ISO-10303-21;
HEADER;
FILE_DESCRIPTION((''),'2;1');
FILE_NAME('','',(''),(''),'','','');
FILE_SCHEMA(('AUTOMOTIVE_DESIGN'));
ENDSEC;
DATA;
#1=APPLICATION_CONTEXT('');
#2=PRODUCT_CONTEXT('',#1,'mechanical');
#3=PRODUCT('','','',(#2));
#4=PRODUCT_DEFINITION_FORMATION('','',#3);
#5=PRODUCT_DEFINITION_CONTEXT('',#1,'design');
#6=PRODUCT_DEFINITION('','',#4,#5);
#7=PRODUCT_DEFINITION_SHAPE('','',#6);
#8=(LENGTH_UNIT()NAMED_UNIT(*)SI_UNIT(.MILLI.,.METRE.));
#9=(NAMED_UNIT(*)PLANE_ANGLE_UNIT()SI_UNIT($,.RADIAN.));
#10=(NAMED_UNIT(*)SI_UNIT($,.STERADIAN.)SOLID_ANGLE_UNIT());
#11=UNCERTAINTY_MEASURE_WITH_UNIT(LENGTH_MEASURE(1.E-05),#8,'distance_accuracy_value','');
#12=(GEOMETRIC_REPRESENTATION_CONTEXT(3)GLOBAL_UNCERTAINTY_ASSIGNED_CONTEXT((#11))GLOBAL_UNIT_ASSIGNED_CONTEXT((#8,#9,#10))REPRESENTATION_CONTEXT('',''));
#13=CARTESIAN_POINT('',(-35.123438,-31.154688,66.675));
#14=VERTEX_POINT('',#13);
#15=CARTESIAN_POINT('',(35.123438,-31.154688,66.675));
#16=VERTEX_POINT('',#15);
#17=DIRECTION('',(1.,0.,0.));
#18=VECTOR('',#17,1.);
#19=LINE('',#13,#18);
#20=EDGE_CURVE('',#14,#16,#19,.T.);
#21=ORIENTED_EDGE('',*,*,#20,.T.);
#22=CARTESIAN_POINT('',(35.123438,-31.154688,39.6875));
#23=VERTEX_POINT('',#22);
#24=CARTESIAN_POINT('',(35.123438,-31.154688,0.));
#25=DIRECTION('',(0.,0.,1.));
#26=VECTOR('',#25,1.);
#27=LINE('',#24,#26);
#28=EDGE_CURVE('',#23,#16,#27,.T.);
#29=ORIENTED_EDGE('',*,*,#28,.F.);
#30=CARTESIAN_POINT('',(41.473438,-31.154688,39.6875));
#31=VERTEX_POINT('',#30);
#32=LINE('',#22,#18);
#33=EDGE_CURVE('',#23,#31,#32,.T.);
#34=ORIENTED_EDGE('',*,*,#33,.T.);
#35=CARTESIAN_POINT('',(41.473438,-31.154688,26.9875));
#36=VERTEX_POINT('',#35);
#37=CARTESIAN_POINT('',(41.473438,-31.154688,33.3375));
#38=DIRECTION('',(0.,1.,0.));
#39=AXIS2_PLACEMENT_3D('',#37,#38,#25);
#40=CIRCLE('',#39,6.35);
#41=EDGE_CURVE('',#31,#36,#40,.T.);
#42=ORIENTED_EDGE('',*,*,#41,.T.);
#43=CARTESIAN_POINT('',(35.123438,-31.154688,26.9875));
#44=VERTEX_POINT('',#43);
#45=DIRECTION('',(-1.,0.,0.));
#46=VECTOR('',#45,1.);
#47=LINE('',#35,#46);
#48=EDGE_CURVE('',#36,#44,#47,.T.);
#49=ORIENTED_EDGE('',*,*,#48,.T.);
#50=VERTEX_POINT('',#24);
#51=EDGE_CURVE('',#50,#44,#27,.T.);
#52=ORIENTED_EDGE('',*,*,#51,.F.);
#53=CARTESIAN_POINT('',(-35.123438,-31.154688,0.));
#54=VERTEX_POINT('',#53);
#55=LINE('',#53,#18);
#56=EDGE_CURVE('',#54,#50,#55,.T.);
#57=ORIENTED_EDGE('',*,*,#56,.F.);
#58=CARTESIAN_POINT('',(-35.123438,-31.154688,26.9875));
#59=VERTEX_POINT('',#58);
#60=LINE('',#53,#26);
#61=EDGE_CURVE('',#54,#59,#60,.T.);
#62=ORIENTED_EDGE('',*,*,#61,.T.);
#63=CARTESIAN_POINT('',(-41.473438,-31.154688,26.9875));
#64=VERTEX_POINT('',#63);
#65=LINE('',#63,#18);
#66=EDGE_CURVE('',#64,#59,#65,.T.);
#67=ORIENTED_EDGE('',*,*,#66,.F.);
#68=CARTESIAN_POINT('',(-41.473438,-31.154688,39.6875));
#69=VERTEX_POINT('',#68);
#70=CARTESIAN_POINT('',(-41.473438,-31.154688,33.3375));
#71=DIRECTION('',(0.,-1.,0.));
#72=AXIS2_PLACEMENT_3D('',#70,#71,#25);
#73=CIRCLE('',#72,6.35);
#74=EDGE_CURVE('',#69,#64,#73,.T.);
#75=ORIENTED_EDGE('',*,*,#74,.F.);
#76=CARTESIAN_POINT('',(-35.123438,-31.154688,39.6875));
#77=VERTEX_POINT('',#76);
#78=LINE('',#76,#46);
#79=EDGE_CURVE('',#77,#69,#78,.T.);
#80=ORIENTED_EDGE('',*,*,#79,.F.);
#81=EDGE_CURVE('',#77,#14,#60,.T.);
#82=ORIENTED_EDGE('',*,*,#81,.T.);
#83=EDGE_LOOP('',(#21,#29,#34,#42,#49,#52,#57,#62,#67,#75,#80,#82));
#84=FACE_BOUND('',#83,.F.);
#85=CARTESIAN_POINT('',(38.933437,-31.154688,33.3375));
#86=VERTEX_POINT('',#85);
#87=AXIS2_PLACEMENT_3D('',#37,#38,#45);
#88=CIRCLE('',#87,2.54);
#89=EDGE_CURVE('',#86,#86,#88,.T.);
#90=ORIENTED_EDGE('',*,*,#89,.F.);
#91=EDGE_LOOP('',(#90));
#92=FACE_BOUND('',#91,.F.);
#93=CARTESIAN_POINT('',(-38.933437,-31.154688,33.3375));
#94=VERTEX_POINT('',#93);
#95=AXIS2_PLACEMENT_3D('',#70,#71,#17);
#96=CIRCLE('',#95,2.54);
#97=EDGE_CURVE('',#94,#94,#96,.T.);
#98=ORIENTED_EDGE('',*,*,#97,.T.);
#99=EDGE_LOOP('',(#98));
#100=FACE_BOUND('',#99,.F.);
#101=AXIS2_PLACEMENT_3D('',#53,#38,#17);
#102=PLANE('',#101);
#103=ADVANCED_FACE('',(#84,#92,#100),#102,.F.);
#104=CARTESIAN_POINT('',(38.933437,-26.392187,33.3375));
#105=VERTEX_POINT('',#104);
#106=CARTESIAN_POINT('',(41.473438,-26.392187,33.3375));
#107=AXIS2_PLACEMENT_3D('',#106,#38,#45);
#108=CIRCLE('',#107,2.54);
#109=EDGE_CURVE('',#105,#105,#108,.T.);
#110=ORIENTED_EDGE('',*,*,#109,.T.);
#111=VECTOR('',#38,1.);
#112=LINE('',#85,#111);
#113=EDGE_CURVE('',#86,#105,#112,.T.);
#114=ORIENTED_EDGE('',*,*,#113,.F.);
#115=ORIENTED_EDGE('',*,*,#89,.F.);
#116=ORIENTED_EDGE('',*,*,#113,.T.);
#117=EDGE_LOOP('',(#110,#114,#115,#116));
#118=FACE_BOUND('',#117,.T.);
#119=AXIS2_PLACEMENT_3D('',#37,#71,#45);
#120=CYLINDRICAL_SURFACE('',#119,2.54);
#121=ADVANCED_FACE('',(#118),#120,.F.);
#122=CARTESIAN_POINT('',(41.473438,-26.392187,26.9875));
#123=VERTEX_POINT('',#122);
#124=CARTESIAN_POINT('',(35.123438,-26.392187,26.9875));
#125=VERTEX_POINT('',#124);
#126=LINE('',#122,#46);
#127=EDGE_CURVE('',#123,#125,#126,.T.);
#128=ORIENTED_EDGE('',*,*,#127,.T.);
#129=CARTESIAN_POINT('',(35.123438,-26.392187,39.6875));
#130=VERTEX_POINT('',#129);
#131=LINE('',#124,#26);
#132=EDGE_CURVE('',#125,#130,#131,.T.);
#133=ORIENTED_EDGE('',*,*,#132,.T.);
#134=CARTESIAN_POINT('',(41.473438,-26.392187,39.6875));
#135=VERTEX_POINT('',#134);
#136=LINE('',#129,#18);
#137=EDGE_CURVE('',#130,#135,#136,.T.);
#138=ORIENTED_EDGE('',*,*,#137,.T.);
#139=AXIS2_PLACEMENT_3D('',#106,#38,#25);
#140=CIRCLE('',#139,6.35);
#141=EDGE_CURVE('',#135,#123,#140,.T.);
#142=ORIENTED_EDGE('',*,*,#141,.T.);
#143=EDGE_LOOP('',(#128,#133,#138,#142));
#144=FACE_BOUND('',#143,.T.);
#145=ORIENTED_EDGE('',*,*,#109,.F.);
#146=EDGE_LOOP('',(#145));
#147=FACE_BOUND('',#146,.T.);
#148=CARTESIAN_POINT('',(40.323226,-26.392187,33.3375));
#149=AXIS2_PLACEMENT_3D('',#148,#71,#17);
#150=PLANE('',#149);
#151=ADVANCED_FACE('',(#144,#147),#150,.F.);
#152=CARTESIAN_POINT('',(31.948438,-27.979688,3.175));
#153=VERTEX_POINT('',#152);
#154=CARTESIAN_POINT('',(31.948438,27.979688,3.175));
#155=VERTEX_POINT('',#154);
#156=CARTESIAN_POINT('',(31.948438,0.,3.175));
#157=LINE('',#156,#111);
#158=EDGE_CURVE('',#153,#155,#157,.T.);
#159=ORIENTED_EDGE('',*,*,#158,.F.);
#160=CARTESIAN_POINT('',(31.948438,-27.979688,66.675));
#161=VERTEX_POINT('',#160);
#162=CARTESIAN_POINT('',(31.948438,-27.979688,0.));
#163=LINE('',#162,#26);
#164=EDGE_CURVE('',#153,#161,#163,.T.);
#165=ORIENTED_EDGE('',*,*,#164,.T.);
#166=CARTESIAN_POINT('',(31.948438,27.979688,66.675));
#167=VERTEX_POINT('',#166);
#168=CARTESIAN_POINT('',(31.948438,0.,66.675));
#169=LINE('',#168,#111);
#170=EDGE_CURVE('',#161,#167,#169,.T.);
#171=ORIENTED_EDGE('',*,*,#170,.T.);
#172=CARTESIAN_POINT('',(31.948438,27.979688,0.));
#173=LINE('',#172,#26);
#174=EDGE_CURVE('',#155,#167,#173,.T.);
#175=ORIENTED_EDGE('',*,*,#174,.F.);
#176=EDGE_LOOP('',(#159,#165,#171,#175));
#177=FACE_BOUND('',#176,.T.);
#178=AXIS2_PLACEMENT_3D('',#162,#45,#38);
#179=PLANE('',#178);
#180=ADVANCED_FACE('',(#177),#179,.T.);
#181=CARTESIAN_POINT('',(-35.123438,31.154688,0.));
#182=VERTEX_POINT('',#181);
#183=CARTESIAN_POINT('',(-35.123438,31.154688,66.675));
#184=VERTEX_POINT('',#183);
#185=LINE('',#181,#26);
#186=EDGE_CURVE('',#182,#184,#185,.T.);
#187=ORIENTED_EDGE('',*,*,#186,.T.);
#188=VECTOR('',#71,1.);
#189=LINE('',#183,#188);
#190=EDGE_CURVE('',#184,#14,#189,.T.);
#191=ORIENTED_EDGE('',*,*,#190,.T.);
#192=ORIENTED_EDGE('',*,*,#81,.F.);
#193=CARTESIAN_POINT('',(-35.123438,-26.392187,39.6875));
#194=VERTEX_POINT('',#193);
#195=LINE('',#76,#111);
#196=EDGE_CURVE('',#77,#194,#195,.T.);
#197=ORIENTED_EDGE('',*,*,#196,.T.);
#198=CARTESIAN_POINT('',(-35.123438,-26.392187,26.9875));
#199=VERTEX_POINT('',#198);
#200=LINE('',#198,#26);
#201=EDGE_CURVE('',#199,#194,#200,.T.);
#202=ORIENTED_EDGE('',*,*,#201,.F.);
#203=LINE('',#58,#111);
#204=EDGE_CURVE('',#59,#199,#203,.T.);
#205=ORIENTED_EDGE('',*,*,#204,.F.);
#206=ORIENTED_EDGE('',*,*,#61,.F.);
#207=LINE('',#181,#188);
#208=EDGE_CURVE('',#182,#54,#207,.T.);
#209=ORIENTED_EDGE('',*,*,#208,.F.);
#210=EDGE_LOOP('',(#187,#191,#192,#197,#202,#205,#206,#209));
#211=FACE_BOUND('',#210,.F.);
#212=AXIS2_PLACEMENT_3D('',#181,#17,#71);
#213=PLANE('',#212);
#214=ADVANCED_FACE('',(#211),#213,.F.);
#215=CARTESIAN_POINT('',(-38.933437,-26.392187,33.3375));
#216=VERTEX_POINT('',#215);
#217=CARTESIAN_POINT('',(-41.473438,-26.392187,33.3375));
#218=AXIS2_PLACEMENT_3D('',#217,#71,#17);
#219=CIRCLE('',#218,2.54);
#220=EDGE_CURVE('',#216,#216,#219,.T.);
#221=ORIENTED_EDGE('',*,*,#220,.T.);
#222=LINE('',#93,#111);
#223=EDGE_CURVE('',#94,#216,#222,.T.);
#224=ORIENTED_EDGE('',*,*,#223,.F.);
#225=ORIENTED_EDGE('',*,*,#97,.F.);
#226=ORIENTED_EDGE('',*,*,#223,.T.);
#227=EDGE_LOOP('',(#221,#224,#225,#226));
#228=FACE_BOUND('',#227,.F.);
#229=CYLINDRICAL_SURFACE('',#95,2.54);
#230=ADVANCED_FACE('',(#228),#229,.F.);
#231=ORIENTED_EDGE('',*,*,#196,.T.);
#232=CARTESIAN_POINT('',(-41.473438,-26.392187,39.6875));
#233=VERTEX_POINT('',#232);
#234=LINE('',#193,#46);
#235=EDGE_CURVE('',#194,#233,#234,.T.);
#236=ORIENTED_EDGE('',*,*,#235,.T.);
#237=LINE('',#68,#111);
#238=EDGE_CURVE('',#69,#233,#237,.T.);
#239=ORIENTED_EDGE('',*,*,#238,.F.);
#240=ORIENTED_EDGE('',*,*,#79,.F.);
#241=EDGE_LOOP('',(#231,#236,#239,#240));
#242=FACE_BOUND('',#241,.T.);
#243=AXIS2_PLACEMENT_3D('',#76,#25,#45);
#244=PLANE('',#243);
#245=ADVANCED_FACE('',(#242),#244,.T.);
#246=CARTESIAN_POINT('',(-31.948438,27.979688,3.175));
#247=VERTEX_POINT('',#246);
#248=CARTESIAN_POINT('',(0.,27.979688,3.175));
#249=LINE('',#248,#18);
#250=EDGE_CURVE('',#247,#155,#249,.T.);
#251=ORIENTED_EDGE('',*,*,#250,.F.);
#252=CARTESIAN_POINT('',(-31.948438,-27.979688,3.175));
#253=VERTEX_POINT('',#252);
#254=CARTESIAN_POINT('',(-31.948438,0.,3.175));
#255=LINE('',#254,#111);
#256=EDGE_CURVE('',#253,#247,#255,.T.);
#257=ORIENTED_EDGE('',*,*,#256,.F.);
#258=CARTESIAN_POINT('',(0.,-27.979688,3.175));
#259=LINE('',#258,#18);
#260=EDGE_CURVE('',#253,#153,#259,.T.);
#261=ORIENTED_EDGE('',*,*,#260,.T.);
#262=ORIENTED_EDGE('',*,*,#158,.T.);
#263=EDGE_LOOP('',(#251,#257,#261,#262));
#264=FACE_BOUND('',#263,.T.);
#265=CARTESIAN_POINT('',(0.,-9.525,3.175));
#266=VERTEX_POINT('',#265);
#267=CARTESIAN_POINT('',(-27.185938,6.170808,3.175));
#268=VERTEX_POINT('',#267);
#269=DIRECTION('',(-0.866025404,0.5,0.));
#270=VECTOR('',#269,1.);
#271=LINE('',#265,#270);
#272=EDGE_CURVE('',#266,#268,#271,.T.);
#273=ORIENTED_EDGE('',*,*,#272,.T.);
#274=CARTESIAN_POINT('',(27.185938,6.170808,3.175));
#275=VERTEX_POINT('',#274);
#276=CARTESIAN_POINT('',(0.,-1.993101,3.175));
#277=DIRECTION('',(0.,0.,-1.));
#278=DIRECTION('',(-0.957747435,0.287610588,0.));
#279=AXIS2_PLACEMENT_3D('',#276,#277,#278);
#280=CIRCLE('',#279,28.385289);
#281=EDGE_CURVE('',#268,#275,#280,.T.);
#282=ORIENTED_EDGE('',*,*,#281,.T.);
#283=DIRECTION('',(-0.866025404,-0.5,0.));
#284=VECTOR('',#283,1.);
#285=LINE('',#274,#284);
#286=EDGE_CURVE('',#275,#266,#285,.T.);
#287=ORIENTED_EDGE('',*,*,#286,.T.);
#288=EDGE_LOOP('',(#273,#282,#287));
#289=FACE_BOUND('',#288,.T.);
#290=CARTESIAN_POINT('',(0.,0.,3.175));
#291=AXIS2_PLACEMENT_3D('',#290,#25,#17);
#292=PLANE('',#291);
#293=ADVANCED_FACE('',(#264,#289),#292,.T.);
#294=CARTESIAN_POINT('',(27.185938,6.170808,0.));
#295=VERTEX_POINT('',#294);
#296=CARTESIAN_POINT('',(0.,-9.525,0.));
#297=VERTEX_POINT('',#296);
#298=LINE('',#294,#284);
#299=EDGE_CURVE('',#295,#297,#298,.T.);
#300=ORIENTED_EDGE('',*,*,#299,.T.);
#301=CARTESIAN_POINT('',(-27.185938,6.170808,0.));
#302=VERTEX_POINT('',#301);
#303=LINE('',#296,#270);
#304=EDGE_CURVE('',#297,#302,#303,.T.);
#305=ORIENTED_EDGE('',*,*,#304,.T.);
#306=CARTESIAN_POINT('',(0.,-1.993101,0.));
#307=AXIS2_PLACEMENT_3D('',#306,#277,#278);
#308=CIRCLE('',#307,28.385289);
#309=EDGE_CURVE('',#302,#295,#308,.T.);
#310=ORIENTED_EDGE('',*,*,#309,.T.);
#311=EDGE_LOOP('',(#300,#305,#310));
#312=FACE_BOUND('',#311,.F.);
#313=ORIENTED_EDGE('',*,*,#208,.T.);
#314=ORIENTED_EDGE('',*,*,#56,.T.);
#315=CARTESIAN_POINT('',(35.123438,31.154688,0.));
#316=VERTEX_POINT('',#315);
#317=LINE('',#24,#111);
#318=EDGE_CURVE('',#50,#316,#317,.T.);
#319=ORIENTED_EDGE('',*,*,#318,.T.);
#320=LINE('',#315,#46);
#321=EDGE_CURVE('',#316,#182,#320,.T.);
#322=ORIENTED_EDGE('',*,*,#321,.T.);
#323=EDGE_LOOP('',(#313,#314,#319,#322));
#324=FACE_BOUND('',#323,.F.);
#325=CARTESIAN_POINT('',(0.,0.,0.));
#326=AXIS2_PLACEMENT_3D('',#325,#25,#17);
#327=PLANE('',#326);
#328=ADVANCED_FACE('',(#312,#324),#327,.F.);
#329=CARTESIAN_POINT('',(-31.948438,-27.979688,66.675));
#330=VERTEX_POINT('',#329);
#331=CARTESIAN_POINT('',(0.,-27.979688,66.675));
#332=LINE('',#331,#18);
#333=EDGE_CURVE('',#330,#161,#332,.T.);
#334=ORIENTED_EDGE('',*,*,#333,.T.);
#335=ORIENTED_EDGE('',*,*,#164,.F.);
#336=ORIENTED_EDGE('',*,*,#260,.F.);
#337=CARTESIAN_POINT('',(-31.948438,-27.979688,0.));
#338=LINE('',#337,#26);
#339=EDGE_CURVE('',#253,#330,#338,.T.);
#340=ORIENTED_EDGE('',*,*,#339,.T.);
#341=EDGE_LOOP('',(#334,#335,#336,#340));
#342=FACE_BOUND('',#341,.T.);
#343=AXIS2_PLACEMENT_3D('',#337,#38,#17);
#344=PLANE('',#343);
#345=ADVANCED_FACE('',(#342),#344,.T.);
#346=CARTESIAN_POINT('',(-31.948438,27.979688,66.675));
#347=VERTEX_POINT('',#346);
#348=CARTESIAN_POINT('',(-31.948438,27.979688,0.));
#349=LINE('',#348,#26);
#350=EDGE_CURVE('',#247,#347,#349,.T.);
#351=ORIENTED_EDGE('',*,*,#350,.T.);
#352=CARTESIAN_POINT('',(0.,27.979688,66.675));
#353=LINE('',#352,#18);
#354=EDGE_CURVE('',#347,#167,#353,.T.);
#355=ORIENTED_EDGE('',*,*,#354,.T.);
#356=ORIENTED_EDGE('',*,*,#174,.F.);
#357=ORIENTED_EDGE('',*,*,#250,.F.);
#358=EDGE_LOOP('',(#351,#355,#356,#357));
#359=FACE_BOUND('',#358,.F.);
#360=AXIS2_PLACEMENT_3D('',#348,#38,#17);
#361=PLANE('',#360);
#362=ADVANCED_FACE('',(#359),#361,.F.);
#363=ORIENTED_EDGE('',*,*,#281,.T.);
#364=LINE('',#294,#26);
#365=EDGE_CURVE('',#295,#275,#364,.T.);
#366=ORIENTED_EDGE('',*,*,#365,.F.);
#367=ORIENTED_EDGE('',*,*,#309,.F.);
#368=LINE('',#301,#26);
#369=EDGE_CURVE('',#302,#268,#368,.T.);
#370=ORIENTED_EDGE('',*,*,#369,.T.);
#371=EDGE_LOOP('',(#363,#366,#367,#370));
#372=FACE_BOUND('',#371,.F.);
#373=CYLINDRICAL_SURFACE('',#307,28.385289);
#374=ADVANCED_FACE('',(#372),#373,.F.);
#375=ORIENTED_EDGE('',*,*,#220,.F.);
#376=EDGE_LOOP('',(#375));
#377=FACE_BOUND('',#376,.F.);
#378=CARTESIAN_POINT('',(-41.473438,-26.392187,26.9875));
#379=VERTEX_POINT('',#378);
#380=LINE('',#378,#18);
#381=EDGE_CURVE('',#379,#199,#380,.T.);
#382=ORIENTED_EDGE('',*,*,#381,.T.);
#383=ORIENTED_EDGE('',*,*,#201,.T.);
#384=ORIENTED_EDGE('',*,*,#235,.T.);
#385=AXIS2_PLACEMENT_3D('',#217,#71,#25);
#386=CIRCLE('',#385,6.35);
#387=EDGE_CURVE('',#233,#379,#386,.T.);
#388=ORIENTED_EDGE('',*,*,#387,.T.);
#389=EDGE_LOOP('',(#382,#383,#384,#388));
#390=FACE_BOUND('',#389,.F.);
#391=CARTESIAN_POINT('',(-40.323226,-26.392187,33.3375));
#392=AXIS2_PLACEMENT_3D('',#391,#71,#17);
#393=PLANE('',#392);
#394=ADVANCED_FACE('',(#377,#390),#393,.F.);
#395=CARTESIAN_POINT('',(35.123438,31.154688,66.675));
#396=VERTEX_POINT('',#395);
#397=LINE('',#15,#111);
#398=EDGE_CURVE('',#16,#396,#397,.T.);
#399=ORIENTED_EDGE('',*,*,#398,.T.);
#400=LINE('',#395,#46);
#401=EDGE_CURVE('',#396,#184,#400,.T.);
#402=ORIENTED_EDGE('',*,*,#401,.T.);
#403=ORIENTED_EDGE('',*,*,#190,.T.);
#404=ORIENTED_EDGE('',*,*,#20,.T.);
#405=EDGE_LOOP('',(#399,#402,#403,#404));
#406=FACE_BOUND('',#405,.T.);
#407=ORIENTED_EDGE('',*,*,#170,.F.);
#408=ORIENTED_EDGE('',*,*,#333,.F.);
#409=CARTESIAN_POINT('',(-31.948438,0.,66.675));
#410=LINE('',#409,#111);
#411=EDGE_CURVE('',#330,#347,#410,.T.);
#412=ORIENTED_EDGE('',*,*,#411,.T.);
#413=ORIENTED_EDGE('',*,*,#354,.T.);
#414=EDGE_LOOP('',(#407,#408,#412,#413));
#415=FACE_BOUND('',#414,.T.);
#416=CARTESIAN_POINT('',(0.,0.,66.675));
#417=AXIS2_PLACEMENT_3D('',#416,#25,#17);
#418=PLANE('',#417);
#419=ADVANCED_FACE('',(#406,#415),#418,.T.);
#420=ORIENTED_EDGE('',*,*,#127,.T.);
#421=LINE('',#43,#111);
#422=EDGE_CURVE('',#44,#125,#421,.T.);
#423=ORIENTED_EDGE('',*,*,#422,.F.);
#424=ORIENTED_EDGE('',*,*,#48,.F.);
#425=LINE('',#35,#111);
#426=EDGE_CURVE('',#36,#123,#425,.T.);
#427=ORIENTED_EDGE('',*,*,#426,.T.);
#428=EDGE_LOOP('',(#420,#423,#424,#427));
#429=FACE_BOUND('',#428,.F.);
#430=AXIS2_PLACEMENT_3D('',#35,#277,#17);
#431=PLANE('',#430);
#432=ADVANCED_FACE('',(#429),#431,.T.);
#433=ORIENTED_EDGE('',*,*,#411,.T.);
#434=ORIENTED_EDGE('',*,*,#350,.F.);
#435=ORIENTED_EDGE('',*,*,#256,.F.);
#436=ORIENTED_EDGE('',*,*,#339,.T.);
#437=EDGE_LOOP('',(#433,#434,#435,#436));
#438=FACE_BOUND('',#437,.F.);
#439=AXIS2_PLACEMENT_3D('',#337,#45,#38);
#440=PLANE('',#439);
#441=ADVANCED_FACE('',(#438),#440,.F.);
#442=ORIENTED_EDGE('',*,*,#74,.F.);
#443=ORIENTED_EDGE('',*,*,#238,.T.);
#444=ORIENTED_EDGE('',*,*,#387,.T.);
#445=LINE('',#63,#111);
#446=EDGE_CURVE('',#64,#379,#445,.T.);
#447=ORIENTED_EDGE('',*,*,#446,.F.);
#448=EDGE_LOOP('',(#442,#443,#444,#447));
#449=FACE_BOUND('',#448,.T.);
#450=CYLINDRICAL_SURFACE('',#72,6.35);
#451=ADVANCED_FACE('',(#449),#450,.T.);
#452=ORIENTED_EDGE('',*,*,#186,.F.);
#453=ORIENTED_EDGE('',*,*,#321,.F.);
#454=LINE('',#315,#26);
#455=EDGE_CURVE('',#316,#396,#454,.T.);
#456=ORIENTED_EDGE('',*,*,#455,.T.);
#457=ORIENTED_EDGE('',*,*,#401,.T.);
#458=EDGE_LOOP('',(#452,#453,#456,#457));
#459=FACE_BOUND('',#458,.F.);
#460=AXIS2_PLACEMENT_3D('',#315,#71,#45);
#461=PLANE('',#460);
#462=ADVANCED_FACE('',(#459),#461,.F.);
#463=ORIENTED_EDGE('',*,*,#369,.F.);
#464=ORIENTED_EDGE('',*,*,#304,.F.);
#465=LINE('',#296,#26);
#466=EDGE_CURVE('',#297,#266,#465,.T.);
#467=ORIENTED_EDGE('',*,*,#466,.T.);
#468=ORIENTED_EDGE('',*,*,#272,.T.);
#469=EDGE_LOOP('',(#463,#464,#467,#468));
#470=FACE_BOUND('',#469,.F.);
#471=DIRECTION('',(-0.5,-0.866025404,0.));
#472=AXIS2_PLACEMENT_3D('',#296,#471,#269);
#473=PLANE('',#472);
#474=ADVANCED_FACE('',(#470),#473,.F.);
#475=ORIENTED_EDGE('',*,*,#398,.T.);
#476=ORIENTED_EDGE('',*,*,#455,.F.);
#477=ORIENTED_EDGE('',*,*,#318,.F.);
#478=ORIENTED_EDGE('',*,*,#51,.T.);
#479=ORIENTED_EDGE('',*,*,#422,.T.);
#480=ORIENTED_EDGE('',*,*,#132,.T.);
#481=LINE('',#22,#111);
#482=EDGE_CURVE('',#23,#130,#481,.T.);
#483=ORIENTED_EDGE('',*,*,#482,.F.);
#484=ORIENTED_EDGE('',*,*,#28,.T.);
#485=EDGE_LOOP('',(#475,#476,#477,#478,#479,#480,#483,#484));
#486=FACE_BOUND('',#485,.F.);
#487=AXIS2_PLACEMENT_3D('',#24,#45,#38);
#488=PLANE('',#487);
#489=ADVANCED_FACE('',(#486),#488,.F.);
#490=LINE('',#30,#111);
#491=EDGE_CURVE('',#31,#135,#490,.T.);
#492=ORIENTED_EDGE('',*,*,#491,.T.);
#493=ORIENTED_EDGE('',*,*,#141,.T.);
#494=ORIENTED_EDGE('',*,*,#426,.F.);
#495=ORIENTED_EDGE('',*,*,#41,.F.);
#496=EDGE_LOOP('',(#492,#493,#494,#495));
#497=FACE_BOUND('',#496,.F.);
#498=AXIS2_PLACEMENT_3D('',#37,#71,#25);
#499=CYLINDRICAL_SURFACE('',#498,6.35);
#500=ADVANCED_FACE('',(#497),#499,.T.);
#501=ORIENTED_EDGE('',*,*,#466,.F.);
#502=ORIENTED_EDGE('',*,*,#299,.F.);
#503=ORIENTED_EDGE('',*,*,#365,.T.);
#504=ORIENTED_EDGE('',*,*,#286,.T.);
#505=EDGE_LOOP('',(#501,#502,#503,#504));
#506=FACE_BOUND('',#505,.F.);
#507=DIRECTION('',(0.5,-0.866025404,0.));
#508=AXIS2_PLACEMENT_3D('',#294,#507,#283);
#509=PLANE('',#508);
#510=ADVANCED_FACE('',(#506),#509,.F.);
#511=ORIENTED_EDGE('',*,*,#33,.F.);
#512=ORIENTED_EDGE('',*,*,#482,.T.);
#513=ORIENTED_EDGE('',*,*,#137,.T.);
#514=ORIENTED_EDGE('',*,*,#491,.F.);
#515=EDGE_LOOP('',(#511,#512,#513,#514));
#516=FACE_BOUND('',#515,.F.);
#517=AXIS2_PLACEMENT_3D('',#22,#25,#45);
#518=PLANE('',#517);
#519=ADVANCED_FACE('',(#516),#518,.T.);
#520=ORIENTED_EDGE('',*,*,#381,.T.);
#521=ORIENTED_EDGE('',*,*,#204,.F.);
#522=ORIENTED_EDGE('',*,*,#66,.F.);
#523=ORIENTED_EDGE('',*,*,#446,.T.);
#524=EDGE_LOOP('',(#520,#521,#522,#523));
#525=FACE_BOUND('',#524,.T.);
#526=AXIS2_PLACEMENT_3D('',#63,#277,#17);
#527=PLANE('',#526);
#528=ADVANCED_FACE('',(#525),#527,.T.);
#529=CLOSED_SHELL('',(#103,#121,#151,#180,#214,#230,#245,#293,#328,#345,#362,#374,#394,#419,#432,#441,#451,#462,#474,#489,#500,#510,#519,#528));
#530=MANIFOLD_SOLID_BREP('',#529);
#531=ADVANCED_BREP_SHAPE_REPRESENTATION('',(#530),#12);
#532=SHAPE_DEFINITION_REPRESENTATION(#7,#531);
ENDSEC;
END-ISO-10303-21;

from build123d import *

# Parameters (mm, degrees)
F0_W     = 63.896875
F0_H     = 55.959375
F1_DEPTH = 66.675
F2_W     = 63.896875
F2_H     = 55.959375
F3_DEPTH = 3.175
F4_R     = 2.54
F5_DEPTH = 4.7625


# Not quite as in the source:
# - a pattern or mirror of a feature is missing from the dataset's text; its kind, count and spacing are read off the source's solid


with BuildPart() as f1:
    # F0 (on Top) → F1 (new body)
    with BuildSketch(Plane.XY):
        Polygon((35.1234375, -31.1546875), (35.1234375, 31.1546875), (-35.1234375, 31.1546875), (-35.1234375, -31.1546875), align=None)
        Rectangle(F0_W, F0_H, mode=Mode.SUBTRACT)
    extrude(amount=F1_DEPTH)

    # F2 (on Top) → F3 (join)
    with BuildSketch(Plane.XY):
        Rectangle(F2_W, F2_H)
        with BuildLine():
            ThreePointArc((-27.1859375, 6.1708083338), (0, 26.3921875), (27.1859375, 6.1708083338))
            Line((27.1859375, 6.1708083338), (0, -9.525))
            Line((0, -9.525), (-27.1859375, 6.1708083338))
        make_face(mode=Mode.SUBTRACT)
    extrude(amount=F3_DEPTH)

    # F4 (on face) → F5 (join)
    with BuildSketch(Plane.XZ.offset(31.1546875)):
        with BuildLine():
            Line((-35.1234375, 26.9875), (-35.1234375, 39.6875))
            Line((-35.1234375, 39.6875), (-41.4734375, 39.6875))
            ThreePointArc((-41.4734375, 39.6875), (-47.8234375, 33.3375), (-41.4734375, 26.9875))
            Line((-41.4734375, 26.9875), (-35.1234375, 26.9875))
        make_face()
        with Locations((-41.4734375, 33.3375)):
            Circle(F4_R, mode=Mode.SUBTRACT)
    f5 = extrude(amount=-F5_DEPTH)

    # F5_copies: F5 across plane
    add(f5.mirror(Plane(origin=(0, 0, 0), x_dir=(0, 0, 1), z_dir=(1, 0, 0))))


solid = f1.part
